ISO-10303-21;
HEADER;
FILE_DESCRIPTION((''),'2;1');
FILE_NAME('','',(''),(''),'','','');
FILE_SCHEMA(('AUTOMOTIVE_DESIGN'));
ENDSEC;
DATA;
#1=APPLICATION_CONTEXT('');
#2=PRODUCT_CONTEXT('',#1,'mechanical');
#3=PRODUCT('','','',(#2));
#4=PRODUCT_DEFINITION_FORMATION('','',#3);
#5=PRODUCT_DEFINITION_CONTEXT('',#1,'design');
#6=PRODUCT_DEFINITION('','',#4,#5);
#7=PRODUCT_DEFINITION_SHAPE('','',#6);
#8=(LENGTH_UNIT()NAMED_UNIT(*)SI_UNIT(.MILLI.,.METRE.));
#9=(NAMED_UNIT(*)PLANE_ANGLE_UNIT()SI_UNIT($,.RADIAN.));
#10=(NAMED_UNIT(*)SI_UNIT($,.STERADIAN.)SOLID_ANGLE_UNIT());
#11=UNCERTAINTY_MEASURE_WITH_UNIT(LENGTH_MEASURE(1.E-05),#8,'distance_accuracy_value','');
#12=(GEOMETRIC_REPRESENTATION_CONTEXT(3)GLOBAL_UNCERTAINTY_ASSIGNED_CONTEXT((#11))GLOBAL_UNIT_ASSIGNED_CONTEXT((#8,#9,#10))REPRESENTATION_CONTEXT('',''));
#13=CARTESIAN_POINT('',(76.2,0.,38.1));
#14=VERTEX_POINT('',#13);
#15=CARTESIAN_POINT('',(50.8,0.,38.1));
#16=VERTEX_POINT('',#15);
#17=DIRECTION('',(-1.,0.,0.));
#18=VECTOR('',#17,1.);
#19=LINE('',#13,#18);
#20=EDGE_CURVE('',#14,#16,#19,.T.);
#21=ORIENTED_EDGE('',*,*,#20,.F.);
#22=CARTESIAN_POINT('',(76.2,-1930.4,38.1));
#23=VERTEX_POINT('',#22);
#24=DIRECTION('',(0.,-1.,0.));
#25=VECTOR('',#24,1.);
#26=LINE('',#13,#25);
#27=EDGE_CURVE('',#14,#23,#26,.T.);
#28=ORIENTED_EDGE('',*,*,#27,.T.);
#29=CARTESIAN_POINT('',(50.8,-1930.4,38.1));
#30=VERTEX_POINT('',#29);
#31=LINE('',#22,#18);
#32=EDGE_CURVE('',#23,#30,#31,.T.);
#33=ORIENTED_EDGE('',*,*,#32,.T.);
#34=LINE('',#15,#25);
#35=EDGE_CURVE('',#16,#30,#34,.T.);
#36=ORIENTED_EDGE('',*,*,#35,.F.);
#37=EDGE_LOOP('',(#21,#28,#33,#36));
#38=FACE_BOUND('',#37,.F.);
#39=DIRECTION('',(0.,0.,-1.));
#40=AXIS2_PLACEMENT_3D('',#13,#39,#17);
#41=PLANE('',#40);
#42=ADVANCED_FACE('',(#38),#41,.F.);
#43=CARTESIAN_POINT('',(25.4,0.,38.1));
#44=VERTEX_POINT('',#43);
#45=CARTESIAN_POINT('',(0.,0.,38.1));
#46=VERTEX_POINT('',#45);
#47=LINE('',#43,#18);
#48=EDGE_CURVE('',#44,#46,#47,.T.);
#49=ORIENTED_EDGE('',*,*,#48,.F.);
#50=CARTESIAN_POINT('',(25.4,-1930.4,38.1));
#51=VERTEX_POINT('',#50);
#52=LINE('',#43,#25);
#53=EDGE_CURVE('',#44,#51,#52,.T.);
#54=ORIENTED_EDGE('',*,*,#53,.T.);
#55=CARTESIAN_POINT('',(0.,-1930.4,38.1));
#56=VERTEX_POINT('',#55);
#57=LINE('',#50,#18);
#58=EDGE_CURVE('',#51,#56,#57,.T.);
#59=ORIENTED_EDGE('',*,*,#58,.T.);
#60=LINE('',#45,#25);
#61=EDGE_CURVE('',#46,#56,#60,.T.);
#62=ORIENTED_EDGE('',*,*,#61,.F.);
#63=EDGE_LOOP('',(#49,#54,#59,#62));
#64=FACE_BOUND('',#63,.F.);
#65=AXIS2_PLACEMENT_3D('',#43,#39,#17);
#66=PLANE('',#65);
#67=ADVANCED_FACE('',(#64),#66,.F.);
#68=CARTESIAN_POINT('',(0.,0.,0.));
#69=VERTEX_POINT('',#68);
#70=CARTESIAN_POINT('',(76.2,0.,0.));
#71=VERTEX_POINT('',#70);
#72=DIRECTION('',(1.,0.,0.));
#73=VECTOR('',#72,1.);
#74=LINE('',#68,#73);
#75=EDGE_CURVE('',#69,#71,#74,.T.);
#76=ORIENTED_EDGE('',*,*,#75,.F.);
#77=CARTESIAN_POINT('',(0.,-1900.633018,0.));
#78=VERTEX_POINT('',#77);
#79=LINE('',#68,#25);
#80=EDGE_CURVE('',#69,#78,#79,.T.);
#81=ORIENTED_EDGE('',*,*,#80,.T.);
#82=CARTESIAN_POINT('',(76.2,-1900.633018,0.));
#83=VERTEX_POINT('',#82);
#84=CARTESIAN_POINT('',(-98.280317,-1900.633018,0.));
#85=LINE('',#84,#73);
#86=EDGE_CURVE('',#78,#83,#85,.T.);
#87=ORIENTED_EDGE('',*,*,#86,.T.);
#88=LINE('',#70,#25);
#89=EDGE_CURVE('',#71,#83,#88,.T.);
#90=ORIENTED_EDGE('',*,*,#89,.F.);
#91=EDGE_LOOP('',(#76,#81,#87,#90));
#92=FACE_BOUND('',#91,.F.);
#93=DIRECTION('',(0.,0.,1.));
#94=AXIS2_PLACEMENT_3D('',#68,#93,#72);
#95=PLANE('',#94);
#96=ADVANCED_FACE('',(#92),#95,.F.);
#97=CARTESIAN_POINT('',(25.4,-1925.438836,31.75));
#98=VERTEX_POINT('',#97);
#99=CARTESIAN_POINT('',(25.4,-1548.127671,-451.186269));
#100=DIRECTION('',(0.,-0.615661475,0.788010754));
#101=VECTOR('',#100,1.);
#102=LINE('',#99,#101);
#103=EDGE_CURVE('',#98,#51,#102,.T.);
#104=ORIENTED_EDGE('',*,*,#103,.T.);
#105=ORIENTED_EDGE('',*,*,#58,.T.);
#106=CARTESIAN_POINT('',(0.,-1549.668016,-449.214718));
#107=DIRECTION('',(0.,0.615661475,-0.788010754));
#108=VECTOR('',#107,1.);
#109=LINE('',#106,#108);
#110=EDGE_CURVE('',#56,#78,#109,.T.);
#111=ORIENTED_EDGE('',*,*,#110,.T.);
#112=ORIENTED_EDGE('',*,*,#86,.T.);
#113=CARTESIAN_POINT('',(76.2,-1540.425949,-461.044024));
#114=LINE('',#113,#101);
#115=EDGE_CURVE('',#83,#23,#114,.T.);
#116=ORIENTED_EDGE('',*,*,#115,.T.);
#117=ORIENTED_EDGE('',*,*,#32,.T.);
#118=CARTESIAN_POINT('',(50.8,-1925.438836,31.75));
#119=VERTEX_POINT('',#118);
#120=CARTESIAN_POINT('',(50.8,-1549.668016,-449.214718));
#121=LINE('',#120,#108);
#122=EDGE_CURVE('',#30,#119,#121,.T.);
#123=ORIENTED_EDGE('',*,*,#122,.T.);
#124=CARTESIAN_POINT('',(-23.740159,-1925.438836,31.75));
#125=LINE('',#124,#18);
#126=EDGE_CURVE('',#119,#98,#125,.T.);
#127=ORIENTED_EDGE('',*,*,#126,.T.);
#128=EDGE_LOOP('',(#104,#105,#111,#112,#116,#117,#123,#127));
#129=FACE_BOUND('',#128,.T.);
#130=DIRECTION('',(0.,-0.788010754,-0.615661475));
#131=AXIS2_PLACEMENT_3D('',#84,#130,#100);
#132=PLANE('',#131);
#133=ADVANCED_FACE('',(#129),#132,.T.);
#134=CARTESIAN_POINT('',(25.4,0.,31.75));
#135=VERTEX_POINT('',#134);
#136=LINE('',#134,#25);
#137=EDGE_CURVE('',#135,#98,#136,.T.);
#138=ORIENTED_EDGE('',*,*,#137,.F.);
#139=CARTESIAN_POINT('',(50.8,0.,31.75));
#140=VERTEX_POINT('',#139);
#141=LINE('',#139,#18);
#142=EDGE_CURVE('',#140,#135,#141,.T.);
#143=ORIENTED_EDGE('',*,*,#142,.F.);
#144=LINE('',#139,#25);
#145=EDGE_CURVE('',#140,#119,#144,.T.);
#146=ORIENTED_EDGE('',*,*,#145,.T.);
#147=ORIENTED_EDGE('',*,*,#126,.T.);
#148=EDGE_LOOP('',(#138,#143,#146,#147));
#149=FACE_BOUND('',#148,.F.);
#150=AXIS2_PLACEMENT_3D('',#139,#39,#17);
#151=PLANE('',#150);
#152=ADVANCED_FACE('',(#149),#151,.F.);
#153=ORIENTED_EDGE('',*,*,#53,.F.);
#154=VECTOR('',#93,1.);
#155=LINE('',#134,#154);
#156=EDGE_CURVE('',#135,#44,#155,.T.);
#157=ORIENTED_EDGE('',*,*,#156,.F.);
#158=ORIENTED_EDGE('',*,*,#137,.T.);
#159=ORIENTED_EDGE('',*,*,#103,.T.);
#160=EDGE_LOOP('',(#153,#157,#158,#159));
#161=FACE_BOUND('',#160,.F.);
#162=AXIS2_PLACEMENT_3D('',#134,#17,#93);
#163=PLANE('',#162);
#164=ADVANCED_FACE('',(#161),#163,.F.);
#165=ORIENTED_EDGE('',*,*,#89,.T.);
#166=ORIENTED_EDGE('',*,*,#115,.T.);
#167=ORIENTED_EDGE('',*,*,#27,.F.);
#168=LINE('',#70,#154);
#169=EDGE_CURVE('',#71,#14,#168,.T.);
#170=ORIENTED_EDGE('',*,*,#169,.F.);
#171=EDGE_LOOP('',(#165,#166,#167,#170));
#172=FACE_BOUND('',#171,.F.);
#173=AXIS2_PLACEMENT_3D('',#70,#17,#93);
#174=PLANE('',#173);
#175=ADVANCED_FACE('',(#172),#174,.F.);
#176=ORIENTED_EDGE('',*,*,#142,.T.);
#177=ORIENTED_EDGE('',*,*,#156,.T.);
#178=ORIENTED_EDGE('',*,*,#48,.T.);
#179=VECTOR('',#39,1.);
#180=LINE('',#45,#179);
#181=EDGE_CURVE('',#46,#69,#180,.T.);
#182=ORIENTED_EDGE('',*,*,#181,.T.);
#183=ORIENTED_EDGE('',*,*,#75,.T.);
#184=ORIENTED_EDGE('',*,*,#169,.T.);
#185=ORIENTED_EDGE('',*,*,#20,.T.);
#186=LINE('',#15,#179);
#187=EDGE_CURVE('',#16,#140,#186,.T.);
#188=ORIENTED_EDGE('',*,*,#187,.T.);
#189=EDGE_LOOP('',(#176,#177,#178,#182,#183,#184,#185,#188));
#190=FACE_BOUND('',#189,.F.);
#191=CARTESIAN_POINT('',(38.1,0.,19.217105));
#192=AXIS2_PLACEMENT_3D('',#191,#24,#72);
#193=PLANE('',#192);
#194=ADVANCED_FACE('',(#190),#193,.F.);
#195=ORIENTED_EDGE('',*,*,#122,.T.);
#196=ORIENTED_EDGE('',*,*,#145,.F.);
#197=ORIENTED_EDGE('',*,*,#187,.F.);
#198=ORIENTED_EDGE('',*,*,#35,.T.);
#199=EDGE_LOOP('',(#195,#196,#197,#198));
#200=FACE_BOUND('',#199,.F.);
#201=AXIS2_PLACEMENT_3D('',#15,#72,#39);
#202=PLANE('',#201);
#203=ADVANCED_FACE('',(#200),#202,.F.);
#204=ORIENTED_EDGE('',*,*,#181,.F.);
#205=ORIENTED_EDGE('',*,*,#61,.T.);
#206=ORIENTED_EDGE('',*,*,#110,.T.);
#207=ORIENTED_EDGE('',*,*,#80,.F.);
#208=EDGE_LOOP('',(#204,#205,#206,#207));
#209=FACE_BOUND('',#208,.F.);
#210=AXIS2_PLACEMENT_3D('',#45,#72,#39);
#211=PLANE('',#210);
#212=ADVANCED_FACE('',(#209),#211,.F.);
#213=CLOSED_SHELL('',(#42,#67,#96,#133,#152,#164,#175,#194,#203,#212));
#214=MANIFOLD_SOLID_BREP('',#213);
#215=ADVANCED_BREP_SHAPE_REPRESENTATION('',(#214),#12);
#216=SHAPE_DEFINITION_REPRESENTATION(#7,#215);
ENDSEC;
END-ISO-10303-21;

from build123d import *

# Parameters (mm, degrees)
F1_DEPTH    = 1930.4
F2_T1_DEPTH = 272.7606343602


# Not quite as in the source:
# - a fillet or chamfer that OpenCascade refuses, or shapes differently, is made with other operations: its cross-section is extruded or revolved along the edge and cut away or added


with BuildPart() as f1:
    # F0 (on Front) → F1 (new body)
    with BuildSketch(Plane.XZ):
        Polygon((0, 38.1), (0, 0), (76.2, 0), (76.2, 38.1), (50.8, 38.1), (50.8, 31.75), (25.4, 31.75), (25.4, 38.1), align=None)
    extrude(amount=F1_DEPTH)

    # F2: chamfer of 38.1 x 29.7669823699 on 1 edges, made by hand

    # F2_s2 → F2_t1 (cut)
    with BuildSketch(Plane.YZ.offset(-98.2803171801)):
        Polygon((-1900.6330176301, 0), (-1930.4, 38.1), (-1930.4, 0), align=None)
    extrude(amount=F2_T1_DEPTH, mode=Mode.SUBTRACT)


solid = f1.part
